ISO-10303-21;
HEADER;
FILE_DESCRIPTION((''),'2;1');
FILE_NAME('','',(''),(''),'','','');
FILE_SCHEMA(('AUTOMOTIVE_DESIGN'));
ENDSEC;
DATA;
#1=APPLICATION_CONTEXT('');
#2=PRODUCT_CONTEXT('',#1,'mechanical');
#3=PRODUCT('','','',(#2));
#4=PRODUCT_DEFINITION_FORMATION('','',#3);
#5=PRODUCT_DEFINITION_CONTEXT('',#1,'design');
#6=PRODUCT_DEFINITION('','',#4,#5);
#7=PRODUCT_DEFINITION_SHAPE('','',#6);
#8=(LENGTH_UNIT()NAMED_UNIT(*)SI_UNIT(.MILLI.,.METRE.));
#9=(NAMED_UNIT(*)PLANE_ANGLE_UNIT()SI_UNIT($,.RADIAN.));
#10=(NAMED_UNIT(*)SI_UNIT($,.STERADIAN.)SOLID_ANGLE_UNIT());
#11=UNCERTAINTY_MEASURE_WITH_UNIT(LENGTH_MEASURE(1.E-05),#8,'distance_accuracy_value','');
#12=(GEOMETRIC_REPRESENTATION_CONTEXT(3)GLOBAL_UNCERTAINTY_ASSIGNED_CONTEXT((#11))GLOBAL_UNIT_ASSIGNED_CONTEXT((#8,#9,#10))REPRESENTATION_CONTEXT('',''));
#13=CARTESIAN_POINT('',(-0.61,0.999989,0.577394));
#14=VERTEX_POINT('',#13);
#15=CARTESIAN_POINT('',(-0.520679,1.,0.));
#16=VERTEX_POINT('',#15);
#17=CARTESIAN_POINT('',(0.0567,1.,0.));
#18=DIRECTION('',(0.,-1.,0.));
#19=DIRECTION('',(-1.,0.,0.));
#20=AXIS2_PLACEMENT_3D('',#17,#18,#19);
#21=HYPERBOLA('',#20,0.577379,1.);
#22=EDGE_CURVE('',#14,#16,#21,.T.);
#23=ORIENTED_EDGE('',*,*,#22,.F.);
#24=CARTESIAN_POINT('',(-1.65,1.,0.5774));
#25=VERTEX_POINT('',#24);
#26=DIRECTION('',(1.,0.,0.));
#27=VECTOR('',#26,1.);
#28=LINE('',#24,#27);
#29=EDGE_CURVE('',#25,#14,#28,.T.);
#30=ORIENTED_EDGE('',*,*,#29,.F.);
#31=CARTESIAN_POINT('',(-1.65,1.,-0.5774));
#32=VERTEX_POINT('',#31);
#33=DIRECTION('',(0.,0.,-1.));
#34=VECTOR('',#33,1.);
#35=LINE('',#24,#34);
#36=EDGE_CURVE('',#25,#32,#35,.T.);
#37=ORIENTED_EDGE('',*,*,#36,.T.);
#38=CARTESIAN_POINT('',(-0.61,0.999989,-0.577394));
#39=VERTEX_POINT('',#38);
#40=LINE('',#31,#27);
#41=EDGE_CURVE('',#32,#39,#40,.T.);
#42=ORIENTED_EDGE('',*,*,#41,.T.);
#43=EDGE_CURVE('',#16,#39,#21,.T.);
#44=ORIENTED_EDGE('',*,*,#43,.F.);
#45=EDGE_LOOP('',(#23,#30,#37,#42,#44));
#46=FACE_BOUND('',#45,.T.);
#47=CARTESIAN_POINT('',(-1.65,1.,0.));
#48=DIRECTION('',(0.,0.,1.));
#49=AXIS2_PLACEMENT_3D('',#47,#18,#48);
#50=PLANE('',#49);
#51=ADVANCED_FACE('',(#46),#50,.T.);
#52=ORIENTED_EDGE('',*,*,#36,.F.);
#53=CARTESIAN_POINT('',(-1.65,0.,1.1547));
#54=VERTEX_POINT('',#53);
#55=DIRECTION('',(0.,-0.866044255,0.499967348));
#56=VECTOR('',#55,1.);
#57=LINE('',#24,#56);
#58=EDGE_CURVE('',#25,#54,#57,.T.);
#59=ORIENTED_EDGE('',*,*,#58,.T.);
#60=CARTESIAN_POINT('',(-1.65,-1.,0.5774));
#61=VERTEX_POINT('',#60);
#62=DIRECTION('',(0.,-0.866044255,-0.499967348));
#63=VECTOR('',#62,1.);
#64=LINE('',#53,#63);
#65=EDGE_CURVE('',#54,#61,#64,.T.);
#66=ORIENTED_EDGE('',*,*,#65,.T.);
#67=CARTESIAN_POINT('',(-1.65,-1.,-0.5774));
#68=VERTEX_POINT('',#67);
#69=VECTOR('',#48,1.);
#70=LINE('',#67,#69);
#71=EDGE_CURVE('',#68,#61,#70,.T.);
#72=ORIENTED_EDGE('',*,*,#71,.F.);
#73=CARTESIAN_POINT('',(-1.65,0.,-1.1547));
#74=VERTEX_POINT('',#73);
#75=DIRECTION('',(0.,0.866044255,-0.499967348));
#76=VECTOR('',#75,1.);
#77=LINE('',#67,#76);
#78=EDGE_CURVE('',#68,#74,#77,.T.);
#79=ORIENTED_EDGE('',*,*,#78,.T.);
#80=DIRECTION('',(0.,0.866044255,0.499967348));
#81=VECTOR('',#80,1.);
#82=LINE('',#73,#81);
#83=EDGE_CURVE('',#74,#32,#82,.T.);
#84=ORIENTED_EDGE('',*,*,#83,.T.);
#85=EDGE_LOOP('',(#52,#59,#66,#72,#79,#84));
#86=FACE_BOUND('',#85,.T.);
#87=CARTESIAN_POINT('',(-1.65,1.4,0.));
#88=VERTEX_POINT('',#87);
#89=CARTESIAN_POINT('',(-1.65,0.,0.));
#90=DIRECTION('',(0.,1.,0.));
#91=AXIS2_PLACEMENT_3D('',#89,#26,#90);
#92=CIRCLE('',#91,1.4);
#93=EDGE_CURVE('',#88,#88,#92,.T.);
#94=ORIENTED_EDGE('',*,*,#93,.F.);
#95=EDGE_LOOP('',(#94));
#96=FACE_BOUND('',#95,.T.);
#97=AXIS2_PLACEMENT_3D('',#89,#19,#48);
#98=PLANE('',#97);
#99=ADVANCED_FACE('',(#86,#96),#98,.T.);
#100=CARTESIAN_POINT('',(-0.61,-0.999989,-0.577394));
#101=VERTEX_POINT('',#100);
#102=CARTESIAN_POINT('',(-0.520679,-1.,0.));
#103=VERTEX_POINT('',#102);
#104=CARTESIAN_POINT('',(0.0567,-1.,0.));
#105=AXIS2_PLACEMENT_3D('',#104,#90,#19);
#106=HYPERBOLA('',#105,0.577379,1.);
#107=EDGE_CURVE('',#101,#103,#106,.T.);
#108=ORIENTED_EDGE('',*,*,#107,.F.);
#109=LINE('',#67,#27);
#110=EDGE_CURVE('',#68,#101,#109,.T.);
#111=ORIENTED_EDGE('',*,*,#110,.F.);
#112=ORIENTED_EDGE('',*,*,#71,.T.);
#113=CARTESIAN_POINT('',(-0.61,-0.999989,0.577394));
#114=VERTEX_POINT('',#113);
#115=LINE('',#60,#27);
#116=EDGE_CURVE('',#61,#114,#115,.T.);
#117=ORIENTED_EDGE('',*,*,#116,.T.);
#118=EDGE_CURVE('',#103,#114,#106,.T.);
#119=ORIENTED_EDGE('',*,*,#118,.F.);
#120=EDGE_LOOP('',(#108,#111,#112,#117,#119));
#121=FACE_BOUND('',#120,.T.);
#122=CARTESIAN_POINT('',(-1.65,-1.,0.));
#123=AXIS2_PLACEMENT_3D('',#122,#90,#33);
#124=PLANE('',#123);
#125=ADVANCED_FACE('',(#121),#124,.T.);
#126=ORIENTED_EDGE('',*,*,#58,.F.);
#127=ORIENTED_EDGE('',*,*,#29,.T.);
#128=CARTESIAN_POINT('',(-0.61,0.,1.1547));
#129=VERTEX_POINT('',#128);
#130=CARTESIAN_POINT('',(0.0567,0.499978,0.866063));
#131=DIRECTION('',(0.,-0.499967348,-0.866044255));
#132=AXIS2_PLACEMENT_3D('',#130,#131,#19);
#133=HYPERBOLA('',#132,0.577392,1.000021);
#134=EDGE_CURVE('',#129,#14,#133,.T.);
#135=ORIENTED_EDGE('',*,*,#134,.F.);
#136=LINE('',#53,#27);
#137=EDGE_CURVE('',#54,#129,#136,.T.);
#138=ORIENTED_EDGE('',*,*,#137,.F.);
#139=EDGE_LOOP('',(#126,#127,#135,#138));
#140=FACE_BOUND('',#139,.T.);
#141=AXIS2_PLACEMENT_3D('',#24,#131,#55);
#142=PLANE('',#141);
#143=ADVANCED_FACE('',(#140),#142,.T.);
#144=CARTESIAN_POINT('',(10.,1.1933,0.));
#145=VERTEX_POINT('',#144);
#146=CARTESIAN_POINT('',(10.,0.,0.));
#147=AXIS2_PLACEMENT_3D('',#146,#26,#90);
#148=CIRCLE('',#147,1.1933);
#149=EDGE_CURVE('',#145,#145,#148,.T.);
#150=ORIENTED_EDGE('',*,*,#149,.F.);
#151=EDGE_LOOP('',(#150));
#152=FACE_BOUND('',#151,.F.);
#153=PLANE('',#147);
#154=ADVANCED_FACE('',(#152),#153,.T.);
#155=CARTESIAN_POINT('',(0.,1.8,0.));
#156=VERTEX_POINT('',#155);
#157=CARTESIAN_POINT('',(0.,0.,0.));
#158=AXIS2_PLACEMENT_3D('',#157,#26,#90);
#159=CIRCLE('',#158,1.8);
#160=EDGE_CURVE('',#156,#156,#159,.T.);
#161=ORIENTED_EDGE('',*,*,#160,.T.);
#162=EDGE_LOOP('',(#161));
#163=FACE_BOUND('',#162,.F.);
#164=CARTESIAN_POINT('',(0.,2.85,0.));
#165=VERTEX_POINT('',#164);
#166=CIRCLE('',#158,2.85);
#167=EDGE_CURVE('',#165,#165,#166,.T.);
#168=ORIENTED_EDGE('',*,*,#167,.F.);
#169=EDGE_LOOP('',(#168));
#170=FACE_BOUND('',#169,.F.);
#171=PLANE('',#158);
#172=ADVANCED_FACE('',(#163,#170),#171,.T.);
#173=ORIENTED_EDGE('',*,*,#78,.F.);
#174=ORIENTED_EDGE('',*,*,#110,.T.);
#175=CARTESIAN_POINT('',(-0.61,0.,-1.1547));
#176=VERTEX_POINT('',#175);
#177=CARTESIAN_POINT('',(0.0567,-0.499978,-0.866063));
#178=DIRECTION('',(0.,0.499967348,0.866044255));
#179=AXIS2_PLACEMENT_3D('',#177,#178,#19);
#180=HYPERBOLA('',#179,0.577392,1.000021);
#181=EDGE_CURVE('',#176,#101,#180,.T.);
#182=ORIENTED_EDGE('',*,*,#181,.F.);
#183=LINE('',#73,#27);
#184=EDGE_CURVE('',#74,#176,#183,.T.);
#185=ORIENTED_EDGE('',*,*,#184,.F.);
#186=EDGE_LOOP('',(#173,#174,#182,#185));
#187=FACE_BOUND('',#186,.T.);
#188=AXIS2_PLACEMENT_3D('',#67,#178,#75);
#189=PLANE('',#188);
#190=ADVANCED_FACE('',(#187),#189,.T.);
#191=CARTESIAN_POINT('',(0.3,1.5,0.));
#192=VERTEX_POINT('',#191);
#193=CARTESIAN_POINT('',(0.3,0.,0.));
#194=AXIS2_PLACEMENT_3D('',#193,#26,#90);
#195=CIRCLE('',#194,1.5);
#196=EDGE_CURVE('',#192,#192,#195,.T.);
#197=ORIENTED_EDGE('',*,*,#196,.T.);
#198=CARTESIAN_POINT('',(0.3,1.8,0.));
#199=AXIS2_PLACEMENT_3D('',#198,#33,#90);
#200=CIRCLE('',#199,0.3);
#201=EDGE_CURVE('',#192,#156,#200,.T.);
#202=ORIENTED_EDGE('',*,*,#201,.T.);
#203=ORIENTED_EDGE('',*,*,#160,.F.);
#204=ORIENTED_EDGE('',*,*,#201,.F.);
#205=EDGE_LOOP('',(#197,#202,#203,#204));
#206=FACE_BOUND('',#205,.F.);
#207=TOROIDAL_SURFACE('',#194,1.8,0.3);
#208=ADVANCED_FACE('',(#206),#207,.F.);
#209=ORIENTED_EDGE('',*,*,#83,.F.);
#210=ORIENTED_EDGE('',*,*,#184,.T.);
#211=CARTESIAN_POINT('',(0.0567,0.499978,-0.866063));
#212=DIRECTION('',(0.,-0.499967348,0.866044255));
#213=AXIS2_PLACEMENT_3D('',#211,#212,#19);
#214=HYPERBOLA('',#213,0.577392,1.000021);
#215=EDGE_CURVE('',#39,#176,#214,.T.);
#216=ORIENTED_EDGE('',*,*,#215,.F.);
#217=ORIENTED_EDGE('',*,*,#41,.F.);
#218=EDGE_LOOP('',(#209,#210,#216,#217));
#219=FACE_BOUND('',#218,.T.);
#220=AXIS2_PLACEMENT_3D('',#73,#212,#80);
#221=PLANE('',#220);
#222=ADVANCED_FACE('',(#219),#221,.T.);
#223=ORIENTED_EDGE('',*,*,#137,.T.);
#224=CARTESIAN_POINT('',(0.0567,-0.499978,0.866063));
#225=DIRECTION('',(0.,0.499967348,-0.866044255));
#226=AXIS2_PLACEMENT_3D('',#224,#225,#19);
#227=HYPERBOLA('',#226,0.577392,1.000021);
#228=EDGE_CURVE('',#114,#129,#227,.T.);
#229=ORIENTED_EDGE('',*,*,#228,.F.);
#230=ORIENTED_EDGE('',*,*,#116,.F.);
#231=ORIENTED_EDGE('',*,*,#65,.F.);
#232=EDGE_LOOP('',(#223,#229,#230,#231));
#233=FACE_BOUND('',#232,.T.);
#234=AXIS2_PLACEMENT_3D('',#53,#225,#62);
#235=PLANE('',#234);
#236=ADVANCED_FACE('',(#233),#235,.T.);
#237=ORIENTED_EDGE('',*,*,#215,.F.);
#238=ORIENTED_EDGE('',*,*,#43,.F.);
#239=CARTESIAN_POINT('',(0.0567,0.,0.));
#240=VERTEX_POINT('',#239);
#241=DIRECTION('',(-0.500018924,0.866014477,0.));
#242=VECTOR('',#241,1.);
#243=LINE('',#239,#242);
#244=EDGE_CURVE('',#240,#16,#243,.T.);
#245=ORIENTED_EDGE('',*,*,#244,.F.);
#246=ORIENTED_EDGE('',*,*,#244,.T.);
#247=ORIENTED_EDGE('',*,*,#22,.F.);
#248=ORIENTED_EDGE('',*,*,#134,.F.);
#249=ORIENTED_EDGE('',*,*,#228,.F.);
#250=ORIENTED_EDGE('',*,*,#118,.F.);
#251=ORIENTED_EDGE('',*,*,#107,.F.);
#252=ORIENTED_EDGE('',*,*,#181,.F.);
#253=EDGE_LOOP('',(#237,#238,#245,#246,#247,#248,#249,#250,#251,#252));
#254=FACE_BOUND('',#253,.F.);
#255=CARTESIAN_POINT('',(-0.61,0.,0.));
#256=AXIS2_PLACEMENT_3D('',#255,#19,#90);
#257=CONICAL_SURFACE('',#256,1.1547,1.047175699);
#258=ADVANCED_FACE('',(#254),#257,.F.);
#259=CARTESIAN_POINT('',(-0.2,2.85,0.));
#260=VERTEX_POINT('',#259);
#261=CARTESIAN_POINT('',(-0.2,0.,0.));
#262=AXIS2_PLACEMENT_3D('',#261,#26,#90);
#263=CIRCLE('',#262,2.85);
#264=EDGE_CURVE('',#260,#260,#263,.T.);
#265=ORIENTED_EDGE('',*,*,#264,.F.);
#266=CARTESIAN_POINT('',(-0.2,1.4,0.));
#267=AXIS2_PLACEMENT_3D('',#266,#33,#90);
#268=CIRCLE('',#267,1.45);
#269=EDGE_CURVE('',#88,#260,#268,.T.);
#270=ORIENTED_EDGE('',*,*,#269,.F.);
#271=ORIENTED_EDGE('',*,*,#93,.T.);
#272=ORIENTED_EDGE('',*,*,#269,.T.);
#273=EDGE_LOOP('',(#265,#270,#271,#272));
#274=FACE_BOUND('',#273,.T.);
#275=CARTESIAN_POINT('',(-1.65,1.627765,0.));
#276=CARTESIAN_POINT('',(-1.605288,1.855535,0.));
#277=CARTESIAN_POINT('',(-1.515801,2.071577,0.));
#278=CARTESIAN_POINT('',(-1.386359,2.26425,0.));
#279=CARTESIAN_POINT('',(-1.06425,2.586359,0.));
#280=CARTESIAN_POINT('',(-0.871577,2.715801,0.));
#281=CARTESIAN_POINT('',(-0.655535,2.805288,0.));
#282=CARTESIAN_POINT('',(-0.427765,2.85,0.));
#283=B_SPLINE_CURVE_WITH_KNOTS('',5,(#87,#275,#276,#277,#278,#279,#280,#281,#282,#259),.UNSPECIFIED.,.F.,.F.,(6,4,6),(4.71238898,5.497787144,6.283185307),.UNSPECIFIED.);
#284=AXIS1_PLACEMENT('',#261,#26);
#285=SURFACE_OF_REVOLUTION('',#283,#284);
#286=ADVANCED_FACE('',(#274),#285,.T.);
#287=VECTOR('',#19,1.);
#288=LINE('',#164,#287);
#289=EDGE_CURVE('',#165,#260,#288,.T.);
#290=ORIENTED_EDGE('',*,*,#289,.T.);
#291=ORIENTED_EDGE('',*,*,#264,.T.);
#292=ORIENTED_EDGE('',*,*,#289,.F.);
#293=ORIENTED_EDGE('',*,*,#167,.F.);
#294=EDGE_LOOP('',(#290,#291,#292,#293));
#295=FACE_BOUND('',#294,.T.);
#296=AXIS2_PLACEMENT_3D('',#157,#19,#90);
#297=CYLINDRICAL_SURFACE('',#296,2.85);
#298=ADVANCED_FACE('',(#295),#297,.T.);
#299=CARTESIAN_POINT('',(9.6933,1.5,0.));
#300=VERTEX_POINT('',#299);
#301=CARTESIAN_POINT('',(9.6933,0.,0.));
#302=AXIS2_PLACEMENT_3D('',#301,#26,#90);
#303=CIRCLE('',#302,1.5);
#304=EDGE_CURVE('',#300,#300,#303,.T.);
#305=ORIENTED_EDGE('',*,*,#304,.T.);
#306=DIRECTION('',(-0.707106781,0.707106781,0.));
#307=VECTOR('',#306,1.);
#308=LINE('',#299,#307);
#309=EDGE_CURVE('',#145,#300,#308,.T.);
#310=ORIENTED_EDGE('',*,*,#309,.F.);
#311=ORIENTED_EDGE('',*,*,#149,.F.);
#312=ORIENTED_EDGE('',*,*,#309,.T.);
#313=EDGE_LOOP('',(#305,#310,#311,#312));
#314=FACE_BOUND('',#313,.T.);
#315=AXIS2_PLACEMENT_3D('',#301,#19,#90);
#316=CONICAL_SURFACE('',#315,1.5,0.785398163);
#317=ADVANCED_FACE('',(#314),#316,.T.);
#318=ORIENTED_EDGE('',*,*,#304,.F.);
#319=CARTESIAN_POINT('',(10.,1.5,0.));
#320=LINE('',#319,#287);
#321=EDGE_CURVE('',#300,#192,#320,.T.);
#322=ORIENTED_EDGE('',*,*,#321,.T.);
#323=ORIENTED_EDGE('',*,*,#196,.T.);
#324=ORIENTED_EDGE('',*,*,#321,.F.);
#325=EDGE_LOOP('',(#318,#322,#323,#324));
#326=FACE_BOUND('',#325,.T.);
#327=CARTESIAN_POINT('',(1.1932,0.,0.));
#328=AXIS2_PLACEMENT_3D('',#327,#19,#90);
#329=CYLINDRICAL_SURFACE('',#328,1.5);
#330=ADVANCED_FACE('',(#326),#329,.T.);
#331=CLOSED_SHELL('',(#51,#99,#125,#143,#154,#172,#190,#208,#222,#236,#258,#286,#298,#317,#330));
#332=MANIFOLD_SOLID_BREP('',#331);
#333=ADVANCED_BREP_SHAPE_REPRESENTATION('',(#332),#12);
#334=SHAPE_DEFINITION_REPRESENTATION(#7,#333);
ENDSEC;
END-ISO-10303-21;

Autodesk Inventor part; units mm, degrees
ref_plane "YZ Plane" through (0, 0, 0) normal (1, 0, 0) x (0, 1, 0)
ref_plane "XZ Plane" through (0, 0, 0) normal (0, 1, 0) x (-1, 0, 0)
sketch "Sketch1" plane through (0, 0, 0) normal (0, 0, 1) x (1, 0, 0)
  line L0 (0.0567, 0) -> (10, 0)
  line L1 (10, 0) -> (10, 1.5)
  line L2 (10, 1.5) -> (1.5, 1.5)
  line L3 (1.5, 1.5) -> (1.1932, 1.5)
  line L4 (1.1932, 1.5) -> (0, 1.5)
  line L5 (0, 1.5) -> (0, 2.85)
  line L6 (0, 2.85) -> (-1.65, 2.85)
  line L7 (-1.65, 2.85) -> (-1.65, 1.1547)
  line L8 (-1.65, 1.1547) -> (-0.61, 1.1547)
  line L9 (-0.61, 1.1547) -> (0.0567, 0)
  line L10 (-3.98, 0) -> (12.33, 0) projected
  line L11 (0, -0.57) -> (0, 3.42) projected
  line L12 (1.5, 1.5) -> (0, 1.5) construction
  dimension "d1" = 8.5
  dimension "d2" = 0.3068
  dimension "d3" = 1.65
  dimension "d4" = 1.04
  dimension "d5" = 60
  dimension "d6" = 3
  dimension "d7" = 3
  dimension "d8" = 2.3094
  dimension "d9" = 5.7
  dimension "d26" = 10
revolve "Body" add sketch "Sketch1" angle 360 about axis through (0.0567, 0, 0) along (1, 0, 0) contours L9 L11 L4 L3 L2 L1 L0 | L9 L8 L7 L6 L5 L11
sketch "Sketch2" plane through (-1.65, 0, 0) normal (-1, 0, 0) x (0, 0, 1)
  circle A0 centre (0, 0) radius 1.1547 projected
  line L0 (0, -3.99) -> (0, 3.99) projected
  line L1 (-3.99, 0) -> (3.99, 0) projected
  line L2 (1.1547, 0) -> (0.5774, -1)
  line L3 (0.5774, -1) -> (-0.5774, -1)
  line L4 (-0.5774, -1) -> (-1.1547, 0)
  line L5 (-1.1547, 0) -> (-0.5774, 1)
  line L6 (-0.5774, 1) -> (0.5774, 1)
  line L7 (0.5774, 1) -> (1.1547, 0)
extrude "Slot" add sketch "Sketch2" against normal up to next contours L7 A0 | A0 L2 | L6 L0 A0 | A0 L0 L3 | L0 L6 A0 | A0 L3 L0 | L4 A0 | A0 L5
fillet "Fillet1" radius 1.45 1 edges at (-1.65, -2.85, 0)
thread "Thread" size "M3x0.5" class "6g" standard "ISO Metric profile" length 8.5
chamfer "Chamfer1" distance 0.3067 distance2 0.3067 1 edges at (10, -1.5, 0) measured on face at (10, -0.6587, -0.1791)
ref_plane "Work Plane1" through (29, 0, 0) normal (0, -1, 0) x (1, 0, 0)
fillet "Fillet2" radius 0.3 1 edges at (0, -1.5, 0)
equation "\"d30\" = R"
equation "\"d17\" = RR"
equation "\"d13\" = GEL"
equation "\"d15\" = -0.5 * SPD + 0.5 * GD"
equation "\"d16\" = GUL"
equation "\"d1\" = GEL"
equation "\"d3\" = KOH"
equation "\"d4\" = INTI"
equation "\"d6\" = GD"
equation "\"d7\" = BDM"
equation "\"d8\" = 1.1547 * SW"
equation "\"d9\" = KOD"
equation "\"d26\" = NLG"
equation "\"GD\" = NND"
equation "\"NLG\" = 10"
equation "\"GEL\" = 8.5"
equation "\"KOD\" = 5.7"
equation "\"KOH\" = 1.65"
equation "\"INTI\" = 1.04"
equation "\"GAL\" = 0.61345 * PTC"
equation "\"GUL\" = 0.61345 * PTC"
equation "\"BDM\" = NND"
equation "\"SW\" = 2"
equation "\"RR\" = 1.45"
equation "\"SPD\" = NND - 1.2269 * PTC"
equation "\"R\" = 0.3"
equation "\"TOA\" = 30deg"
equation "\"GD1\" = THREADDIA - 1.2269 * PTC"
equation "\"THREADDIA\" = 3"
equation "\"PTC\" = 0.5"
equation "\"NND\" = 3"
equation "\"KOH1\" = 0.2"
equation "\"E0\" = 2.303"
properties part number "ISO 7380-1 - M3 x 10" material "Steel"
